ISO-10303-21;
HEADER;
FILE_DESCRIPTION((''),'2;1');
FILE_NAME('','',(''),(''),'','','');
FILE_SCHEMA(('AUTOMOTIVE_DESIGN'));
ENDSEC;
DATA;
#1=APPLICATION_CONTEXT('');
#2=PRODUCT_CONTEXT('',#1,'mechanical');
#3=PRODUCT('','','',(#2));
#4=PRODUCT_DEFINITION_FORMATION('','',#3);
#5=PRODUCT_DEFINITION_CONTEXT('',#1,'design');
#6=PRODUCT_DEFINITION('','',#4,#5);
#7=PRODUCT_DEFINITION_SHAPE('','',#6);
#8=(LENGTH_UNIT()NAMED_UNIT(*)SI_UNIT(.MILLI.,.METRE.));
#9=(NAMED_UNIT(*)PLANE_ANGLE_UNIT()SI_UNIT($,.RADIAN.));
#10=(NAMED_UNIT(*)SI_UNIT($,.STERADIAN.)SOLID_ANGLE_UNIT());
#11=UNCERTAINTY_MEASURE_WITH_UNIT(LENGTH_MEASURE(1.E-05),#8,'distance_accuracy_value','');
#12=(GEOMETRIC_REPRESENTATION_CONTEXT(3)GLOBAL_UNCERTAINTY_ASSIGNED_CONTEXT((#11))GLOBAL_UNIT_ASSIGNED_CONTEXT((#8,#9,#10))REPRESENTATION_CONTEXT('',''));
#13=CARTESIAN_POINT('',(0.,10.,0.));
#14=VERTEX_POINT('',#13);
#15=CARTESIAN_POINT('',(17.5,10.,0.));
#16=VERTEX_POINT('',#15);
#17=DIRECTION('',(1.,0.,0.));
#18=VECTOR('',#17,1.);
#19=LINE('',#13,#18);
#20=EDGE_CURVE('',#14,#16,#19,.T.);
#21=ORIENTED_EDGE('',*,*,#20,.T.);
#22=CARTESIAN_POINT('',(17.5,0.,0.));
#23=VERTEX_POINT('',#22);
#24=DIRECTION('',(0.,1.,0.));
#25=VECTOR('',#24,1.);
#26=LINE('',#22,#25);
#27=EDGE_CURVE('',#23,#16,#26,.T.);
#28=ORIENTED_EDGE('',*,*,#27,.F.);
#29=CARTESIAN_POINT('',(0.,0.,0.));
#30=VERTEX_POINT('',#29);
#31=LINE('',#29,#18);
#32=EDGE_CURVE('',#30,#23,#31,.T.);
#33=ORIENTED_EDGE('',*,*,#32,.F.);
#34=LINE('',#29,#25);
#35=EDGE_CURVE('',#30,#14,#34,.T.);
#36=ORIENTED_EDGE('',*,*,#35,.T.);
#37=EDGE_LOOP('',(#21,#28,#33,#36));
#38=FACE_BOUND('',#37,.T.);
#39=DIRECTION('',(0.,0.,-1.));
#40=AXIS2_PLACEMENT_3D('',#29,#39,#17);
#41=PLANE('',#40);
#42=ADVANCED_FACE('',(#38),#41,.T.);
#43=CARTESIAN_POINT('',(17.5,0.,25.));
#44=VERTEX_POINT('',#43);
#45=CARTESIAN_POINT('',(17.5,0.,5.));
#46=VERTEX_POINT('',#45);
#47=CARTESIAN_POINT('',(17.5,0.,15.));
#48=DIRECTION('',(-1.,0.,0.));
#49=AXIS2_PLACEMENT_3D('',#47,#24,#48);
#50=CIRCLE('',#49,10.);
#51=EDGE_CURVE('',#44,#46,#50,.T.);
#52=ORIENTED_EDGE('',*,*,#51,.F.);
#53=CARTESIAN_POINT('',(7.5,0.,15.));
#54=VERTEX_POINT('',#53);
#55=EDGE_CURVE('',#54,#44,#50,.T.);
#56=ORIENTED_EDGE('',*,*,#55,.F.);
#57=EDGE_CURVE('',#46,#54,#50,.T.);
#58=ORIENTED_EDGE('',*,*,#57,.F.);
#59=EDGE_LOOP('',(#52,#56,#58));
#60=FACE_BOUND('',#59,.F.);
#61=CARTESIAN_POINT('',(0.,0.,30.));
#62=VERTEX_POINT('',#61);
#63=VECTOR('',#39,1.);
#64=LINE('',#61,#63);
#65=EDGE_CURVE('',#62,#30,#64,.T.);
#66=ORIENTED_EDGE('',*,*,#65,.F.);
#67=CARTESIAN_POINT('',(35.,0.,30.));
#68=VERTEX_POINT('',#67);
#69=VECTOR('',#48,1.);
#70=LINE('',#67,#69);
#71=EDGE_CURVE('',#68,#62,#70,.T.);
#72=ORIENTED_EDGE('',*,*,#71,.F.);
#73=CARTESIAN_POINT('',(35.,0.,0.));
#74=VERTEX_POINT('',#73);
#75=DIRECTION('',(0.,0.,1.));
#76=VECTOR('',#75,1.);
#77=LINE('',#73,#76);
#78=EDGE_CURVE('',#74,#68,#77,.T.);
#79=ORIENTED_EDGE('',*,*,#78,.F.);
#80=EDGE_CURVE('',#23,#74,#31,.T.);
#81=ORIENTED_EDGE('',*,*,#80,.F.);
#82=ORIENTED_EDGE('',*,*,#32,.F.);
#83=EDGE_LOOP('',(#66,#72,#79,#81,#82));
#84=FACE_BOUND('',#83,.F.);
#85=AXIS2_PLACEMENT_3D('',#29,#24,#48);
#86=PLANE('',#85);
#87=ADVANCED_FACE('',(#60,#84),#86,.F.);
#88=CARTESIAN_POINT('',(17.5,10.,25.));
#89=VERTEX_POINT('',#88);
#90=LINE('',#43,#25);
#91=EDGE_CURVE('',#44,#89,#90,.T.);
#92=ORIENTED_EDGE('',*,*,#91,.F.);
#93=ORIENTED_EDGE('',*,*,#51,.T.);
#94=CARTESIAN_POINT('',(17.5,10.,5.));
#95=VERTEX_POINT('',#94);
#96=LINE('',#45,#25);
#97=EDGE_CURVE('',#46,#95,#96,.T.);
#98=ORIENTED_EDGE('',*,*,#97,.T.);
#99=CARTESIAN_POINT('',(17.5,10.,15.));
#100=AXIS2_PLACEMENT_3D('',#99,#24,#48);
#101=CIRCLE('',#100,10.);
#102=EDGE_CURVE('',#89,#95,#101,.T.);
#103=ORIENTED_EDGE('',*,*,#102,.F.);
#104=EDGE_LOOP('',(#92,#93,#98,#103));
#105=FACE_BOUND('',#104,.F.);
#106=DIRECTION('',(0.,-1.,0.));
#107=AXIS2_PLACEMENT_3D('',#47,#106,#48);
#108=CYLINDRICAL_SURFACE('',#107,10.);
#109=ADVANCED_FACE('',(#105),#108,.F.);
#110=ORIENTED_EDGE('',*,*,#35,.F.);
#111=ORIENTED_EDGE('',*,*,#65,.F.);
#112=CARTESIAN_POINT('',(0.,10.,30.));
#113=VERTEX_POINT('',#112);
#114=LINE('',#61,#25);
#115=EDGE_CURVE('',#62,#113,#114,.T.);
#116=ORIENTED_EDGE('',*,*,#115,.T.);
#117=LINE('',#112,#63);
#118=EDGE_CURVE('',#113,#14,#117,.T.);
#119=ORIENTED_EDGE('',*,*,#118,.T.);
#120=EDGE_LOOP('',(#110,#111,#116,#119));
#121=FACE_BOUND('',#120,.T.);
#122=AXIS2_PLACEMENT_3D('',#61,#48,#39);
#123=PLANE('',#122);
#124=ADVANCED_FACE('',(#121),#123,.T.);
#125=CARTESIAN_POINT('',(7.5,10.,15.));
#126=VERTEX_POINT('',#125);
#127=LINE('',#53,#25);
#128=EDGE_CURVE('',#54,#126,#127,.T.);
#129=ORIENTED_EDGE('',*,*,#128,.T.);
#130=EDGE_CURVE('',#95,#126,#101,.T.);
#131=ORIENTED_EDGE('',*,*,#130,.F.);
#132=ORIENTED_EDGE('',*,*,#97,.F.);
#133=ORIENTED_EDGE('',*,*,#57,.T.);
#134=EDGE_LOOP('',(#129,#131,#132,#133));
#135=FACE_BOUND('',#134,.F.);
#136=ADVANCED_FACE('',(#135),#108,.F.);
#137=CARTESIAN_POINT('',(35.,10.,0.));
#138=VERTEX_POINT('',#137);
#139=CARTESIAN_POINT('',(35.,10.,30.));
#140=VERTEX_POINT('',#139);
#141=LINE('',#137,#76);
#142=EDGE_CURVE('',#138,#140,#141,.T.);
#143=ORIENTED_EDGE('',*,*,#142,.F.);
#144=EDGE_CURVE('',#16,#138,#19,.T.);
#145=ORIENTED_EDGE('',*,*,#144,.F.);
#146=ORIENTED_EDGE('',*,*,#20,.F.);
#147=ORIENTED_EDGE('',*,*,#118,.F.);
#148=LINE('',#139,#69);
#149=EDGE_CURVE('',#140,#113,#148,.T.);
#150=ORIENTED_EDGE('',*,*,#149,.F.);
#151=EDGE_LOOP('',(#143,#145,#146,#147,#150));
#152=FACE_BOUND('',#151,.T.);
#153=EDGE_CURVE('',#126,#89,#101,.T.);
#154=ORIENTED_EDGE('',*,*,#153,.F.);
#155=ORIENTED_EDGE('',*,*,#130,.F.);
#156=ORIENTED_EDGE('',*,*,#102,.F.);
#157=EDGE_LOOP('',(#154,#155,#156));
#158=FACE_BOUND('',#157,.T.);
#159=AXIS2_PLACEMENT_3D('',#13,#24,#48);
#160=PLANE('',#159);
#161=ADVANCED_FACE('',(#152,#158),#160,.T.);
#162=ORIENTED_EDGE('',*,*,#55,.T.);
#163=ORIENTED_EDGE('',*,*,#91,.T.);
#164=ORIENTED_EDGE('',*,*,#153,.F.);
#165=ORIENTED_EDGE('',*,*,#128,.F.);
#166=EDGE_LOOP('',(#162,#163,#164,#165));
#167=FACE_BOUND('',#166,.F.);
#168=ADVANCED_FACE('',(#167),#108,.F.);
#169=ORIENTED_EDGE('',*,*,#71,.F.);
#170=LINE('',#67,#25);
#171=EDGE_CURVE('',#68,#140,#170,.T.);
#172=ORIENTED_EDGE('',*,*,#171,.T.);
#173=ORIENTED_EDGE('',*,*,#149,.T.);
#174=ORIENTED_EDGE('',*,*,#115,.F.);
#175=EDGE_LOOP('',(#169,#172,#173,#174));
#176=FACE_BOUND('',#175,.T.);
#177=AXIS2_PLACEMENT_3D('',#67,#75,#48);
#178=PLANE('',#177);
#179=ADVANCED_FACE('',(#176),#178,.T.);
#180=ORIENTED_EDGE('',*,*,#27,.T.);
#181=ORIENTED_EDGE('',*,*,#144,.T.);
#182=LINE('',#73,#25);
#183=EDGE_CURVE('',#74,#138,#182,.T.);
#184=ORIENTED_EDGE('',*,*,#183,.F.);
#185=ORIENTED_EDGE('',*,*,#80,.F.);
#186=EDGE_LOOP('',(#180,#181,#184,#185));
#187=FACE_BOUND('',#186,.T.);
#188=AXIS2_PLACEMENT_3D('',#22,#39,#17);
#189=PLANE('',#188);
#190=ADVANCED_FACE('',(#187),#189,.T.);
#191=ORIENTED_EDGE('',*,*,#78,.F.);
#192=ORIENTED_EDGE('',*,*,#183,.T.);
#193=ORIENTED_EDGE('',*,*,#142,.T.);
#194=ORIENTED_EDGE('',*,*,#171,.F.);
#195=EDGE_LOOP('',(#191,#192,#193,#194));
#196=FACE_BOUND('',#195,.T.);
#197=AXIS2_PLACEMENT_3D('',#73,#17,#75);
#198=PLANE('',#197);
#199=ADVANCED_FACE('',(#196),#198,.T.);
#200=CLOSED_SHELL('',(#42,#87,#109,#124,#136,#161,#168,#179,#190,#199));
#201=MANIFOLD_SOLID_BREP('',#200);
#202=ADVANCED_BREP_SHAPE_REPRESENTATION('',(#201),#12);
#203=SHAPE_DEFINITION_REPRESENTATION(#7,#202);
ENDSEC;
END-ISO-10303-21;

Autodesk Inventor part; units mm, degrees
ref_plane "YZ Plane" through (0, 0, 0) normal (1, 0, 0) x (0, 1, 0)
ref_plane "XZ Plane" through (0, 0, 0) normal (0, 1, 0) x (-1, 0, 0)
ref_plane "XY Plane" through (0, 0, 0) normal (0, 0, 1) x (1, 0, 0)
sketch "Эскиз1" plane through (0, 0, 0) normal (0, 1, 0) x (-1, 0, 0)
  line L0 (0, 0) -> (-35, 0)
  line L1 (-35, 0) -> (-35, 30)
  line L2 (-35, 30) -> (0, 30)
  line L3 (0, 30) -> (0, 0)
  line L4 (-17.5, 25) -> (-17.5, 0)
  line L5 (-17.5, 25) -> (-17.5, 15)
  circle A0 centre (-17.5, 15) radius 10
  dimension "d0" = 35
  dimension "d1" = 30
  dimension "d17" = 10
  dimension "d20" = 15
extrude "Выдавливание1" add sketch "Эскиз1" along normal blind 10
thread "Резьба2" size "M20x1.5" class "6H" standard "ISO Metric profile" full length
properties part number "Деталь перемещение по резьбе"
